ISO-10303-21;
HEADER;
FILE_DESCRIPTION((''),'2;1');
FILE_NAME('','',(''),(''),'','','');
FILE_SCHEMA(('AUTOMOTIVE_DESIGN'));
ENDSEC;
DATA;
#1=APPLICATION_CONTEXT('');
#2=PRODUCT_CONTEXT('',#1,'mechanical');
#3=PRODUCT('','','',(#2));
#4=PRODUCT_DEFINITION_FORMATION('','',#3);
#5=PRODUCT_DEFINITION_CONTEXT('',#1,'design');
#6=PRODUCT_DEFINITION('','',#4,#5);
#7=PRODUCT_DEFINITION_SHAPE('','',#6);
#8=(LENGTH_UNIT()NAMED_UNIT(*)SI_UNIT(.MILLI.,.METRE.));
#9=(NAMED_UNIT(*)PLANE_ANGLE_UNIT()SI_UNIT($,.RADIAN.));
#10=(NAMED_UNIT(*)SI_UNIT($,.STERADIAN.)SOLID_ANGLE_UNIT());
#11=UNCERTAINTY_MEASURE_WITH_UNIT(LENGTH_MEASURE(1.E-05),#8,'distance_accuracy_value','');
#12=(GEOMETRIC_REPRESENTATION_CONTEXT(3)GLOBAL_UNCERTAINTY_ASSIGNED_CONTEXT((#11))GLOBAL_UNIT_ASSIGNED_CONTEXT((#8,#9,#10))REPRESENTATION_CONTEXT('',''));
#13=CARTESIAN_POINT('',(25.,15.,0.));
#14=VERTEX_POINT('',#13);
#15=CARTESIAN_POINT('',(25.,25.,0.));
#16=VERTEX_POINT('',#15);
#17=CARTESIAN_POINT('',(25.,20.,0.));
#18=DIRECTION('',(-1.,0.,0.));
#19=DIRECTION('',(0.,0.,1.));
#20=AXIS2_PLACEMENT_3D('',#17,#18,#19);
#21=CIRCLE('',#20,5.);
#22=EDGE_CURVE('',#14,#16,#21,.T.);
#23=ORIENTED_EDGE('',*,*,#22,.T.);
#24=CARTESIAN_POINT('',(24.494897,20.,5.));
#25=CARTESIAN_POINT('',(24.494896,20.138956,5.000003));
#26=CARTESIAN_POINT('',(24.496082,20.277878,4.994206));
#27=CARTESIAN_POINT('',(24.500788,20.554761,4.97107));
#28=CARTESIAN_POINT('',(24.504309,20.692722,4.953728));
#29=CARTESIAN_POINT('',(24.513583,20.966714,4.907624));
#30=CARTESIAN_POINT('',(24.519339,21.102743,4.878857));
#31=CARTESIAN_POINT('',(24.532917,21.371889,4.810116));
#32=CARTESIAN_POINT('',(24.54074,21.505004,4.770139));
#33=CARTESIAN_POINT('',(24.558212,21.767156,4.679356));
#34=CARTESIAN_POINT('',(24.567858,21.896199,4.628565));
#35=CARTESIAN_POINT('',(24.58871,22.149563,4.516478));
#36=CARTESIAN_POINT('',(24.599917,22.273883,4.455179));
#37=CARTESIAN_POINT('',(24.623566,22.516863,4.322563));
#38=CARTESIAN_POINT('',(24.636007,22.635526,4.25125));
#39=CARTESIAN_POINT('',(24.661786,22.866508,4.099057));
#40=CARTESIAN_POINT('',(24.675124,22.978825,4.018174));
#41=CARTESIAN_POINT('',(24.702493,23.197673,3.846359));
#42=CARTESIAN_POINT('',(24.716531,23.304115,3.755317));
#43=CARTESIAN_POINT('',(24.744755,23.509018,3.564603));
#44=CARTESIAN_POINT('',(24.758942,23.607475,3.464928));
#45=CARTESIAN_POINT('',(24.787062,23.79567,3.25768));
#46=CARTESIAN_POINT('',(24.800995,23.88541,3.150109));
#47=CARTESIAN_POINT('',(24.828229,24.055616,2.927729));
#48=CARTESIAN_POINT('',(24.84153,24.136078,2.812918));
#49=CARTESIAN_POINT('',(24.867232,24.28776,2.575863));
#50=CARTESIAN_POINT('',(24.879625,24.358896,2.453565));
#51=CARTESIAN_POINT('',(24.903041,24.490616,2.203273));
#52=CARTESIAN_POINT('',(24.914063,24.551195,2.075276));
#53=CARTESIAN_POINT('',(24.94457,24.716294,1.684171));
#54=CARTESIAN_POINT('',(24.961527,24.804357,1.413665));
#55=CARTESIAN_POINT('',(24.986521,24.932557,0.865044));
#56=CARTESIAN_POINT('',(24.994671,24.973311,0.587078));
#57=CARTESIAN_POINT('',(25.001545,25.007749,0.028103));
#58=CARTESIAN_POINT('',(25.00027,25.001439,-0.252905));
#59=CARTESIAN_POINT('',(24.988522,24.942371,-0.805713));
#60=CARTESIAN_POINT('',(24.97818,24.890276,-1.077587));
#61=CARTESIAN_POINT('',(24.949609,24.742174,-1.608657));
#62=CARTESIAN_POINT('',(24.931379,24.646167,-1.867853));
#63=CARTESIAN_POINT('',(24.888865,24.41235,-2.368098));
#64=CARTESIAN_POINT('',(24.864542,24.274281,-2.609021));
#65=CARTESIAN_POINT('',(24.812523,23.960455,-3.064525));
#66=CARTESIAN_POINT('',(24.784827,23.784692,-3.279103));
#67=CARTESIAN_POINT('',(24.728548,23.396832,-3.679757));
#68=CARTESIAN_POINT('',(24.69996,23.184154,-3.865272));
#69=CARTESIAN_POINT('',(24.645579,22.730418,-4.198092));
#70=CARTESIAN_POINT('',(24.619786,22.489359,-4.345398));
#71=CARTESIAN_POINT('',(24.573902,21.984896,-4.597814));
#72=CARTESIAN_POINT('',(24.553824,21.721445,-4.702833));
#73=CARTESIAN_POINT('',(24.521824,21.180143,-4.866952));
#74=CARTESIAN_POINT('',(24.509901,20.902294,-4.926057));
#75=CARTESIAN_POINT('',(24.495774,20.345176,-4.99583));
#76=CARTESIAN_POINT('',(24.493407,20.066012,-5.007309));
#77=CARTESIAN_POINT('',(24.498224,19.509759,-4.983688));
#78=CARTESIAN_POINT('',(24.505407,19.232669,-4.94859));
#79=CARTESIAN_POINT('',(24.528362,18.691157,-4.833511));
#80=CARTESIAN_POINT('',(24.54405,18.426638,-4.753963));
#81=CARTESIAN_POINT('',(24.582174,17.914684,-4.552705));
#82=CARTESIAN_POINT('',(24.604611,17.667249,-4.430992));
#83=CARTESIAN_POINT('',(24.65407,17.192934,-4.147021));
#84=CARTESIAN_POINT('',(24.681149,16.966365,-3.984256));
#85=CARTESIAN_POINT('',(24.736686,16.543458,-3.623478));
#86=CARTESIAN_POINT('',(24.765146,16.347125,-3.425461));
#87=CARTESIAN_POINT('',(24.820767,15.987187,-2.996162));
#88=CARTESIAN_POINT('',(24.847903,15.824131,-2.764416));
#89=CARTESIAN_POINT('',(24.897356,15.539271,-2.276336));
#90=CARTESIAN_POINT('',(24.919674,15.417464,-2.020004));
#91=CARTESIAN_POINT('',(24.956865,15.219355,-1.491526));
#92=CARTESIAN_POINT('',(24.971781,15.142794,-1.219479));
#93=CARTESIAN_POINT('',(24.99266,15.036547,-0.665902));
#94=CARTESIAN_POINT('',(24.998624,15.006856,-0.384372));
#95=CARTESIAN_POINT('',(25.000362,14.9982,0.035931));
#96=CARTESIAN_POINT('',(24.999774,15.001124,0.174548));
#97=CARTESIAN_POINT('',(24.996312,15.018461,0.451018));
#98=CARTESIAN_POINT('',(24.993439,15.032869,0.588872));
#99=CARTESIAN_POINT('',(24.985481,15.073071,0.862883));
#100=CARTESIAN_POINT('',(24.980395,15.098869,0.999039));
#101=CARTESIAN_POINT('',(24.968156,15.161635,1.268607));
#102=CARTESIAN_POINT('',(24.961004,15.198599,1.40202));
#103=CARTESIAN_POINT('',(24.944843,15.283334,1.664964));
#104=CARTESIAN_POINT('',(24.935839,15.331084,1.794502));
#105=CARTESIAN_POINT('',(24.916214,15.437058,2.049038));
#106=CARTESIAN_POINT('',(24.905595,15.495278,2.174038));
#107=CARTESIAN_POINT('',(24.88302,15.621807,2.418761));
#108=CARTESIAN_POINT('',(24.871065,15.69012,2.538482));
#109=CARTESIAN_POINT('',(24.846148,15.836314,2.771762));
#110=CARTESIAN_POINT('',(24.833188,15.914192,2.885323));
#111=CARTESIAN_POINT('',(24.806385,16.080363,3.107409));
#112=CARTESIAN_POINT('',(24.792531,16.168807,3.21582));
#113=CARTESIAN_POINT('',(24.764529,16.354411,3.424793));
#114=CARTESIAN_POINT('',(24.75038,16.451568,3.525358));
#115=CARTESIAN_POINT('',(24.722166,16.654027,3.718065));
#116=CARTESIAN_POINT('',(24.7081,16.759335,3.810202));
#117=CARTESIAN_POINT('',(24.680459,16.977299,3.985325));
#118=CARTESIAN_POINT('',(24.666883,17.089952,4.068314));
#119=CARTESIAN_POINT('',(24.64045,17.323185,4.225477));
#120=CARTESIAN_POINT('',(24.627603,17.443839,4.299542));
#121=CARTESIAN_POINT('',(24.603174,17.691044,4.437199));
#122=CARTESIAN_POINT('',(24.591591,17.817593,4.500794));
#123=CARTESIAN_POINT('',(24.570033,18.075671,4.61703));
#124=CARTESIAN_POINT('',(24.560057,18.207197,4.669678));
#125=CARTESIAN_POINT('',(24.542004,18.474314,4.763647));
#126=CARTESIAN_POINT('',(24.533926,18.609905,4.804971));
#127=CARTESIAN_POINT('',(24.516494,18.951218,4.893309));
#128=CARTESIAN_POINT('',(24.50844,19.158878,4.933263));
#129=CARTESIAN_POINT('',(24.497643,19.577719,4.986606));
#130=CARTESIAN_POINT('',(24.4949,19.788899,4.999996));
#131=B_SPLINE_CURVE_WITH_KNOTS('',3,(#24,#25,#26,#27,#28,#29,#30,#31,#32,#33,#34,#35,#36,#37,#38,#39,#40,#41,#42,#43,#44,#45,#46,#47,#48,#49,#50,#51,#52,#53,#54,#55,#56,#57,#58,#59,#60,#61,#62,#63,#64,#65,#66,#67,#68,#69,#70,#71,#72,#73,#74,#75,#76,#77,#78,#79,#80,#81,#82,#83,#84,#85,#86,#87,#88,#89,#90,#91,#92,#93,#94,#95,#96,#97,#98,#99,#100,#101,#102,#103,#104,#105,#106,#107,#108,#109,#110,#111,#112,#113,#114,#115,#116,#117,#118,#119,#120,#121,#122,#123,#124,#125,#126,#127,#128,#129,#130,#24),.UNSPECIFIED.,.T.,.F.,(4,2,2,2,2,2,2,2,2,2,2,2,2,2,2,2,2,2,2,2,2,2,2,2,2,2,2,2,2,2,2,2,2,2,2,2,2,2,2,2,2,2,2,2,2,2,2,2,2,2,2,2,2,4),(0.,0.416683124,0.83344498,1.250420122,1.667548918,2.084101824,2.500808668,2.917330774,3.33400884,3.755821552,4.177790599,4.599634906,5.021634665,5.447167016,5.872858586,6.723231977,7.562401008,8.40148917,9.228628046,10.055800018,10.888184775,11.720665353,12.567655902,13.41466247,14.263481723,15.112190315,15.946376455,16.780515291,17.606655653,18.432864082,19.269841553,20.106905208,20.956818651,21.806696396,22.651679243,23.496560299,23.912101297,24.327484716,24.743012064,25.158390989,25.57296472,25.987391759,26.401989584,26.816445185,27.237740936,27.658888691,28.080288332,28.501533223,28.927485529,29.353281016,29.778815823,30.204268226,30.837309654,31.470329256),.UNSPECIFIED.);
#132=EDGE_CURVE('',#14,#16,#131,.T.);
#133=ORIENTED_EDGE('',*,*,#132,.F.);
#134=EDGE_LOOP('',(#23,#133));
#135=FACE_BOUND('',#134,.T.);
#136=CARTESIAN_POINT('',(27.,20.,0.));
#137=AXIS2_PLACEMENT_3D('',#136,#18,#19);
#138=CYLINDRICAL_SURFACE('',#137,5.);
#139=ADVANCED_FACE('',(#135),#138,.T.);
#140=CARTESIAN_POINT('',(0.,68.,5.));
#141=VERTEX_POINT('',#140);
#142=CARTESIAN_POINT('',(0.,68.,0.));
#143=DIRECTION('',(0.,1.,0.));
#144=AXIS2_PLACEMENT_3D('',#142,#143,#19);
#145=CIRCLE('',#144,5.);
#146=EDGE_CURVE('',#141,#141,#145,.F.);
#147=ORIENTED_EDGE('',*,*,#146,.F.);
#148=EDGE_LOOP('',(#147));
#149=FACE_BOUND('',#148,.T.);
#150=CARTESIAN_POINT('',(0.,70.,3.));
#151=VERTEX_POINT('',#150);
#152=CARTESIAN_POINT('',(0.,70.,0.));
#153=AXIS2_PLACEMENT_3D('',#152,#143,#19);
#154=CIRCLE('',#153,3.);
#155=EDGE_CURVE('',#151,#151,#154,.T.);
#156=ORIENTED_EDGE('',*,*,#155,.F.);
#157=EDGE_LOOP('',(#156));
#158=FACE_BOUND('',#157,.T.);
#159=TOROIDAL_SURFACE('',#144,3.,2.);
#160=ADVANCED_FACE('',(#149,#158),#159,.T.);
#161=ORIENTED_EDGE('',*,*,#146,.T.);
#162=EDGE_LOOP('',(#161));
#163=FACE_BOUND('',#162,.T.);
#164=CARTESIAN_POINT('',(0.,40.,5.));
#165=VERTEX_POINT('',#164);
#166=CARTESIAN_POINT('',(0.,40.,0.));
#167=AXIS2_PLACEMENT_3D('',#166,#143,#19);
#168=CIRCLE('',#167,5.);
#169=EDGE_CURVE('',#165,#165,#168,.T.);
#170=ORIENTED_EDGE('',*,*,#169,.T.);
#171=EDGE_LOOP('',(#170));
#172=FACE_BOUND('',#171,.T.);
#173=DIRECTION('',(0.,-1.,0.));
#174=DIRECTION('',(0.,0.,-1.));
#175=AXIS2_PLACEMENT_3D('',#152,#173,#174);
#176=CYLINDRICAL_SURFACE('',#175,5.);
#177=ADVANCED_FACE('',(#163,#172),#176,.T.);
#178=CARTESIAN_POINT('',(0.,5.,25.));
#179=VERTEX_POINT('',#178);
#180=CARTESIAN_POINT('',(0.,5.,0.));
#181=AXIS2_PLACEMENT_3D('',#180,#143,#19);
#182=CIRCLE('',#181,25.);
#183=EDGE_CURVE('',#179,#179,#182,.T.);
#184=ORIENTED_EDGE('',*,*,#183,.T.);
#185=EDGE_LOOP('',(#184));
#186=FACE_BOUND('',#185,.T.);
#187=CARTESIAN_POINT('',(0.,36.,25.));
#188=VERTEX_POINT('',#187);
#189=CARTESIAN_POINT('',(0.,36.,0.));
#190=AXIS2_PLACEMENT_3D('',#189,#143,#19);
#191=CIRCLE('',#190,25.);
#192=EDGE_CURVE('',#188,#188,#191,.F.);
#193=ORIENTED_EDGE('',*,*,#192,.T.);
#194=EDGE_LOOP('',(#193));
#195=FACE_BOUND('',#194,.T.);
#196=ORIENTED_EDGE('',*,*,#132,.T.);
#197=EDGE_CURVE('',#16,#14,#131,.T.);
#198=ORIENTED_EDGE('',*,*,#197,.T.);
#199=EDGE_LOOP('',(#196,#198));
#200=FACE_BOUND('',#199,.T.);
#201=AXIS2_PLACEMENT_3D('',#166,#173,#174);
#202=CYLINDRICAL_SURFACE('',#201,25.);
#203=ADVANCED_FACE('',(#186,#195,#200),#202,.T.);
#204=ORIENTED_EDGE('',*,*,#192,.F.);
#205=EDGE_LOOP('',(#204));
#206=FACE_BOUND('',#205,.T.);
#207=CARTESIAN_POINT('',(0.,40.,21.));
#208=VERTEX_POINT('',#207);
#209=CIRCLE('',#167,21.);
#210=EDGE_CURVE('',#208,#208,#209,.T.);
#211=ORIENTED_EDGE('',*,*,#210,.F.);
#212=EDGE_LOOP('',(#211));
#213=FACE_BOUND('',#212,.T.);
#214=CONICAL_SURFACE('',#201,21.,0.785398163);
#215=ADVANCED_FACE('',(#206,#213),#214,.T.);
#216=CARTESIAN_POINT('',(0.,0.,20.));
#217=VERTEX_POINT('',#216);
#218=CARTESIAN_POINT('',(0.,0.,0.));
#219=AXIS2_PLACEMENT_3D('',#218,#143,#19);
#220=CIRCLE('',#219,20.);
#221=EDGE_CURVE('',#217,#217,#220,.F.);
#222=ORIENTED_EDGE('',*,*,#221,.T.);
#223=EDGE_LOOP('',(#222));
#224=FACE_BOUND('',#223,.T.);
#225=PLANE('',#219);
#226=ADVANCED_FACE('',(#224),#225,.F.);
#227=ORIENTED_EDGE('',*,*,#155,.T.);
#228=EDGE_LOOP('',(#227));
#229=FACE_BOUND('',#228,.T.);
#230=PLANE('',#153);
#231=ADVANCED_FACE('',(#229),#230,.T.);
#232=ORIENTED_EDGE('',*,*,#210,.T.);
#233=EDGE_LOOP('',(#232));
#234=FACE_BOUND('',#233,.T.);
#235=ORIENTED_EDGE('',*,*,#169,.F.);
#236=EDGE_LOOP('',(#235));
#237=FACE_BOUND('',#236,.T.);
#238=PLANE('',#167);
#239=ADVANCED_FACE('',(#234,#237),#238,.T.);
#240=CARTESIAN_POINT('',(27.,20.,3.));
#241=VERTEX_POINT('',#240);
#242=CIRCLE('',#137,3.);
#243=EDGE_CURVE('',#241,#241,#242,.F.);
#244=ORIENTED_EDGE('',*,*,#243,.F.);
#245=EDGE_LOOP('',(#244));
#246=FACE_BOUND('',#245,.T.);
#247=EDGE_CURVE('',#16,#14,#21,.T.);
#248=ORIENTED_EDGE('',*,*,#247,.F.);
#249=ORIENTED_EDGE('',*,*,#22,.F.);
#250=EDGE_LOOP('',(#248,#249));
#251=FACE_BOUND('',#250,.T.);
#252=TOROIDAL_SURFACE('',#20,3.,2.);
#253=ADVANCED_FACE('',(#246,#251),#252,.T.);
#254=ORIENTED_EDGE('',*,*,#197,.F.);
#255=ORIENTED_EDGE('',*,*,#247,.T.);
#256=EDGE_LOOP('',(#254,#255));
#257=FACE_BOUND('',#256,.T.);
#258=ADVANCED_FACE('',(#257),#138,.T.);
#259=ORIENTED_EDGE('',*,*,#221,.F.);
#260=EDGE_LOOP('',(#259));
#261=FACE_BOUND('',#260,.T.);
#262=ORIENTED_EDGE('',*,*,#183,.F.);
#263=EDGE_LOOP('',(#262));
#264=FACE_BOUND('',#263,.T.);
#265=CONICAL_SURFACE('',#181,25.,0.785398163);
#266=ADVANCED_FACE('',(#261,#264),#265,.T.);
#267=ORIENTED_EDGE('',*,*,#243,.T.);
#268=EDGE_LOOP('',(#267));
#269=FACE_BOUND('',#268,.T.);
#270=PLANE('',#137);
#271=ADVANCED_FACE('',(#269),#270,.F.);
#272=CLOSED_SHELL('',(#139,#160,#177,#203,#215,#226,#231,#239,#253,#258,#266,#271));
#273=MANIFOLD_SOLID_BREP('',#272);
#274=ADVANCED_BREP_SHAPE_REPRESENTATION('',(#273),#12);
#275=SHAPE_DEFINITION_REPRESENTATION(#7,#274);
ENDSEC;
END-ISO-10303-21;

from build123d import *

# Parameters (mm, degrees)
CROQUIS1_R                   = 25
SALIENTE_EXTRUIR1_DEPTH      = 40
CROQUIS2_R                   = 5
SALIENTE_EXTRUIR2_DEPTH      = 30
REDONDEO1_R                  = 2
CHAFL_N1_SIZE                = 4
SALIENTE_EXTRUIR3_DEPTH      = 2
SALIENTE_EXTRUIR3_DEPTH_BACK = 2
CROQUIS3_R                   = 5
CHAFL_N2_SIZE                = 5


with BuildPart() as part:
    # Croquis1 → Saliente-Extruir1 (new body)
    with BuildSketch(Plane(origin=(0, 0, 0), x_dir=(1, 0, 0), z_dir=(0, 1, 0))):
        with Locations(Location((0, 0, 0), (0, 0, 270))):
            Circle(CROQUIS1_R)
    extrude(amount=SALIENTE_EXTRUIR1_DEPTH)

    # Croquis2 → Saliente-Extruir2 (add)
    with BuildSketch(Plane(origin=(0, 40, 0), x_dir=(1, 0, 0), z_dir=(0, 1, 0))):
        with Locations(Location((0, 0, 0), (0, 0, 270))):
            Circle(CROQUIS2_R)
    extrude(amount=SALIENTE_EXTRUIR2_DEPTH)

    # Redondeo1
    redondeo1_edges = [part.edges().sort_by_distance(p)[0] for p in [
        (0, 70, -5),
    ]]
    fillet(redondeo1_edges, radius=REDONDEO1_R)

    # Chaflán1
    chafl_n1_edges = [part.edges().sort_by_distance(p)[0] for p in [
        (0, 40, -25),
    ]]
    chamfer(chafl_n1_edges, length=CHAFL_N1_SIZE)

    # Croquis3 → Saliente-Extruir3 (add, two sides: drawn at the far end of the back side and taken through both)
    with BuildSketch(Plane.ZY.offset(-25).offset(-SALIENTE_EXTRUIR3_DEPTH_BACK)):
        with Locations((0, 20)):
            Circle(CROQUIS3_R)
    extrude(amount=SALIENTE_EXTRUIR3_DEPTH + SALIENTE_EXTRUIR3_DEPTH_BACK)

    # Redondeo3: read off the stored shape, not the designer's step
    # Redondeo3 outline → Redondeo3 (revolve, cut)
    with BuildSketch(Plane(origin=(0, 20, 0), x_dir=(0, 1, 0), z_dir=(0, 0, -1))):
        with BuildLine():
            Line((5, 27), (3, 27))
            ThreePointArc((3, 27), (4.414213562, 26.414213562), (5, 25))
            Line((5, 25), (5, 27))
        make_face()
    revolve(axis=Axis((0, 20, 0), (1, 0, 0)), mode=Mode.SUBTRACT)

    # Chaflán2
    chafl_n2_edges = [part.edges().sort_by_distance(p)[0] for p in [
        (0, 0, -25),
    ]]
    chamfer(chafl_n2_edges, length=CHAFL_N2_SIZE)


solid = part.part
